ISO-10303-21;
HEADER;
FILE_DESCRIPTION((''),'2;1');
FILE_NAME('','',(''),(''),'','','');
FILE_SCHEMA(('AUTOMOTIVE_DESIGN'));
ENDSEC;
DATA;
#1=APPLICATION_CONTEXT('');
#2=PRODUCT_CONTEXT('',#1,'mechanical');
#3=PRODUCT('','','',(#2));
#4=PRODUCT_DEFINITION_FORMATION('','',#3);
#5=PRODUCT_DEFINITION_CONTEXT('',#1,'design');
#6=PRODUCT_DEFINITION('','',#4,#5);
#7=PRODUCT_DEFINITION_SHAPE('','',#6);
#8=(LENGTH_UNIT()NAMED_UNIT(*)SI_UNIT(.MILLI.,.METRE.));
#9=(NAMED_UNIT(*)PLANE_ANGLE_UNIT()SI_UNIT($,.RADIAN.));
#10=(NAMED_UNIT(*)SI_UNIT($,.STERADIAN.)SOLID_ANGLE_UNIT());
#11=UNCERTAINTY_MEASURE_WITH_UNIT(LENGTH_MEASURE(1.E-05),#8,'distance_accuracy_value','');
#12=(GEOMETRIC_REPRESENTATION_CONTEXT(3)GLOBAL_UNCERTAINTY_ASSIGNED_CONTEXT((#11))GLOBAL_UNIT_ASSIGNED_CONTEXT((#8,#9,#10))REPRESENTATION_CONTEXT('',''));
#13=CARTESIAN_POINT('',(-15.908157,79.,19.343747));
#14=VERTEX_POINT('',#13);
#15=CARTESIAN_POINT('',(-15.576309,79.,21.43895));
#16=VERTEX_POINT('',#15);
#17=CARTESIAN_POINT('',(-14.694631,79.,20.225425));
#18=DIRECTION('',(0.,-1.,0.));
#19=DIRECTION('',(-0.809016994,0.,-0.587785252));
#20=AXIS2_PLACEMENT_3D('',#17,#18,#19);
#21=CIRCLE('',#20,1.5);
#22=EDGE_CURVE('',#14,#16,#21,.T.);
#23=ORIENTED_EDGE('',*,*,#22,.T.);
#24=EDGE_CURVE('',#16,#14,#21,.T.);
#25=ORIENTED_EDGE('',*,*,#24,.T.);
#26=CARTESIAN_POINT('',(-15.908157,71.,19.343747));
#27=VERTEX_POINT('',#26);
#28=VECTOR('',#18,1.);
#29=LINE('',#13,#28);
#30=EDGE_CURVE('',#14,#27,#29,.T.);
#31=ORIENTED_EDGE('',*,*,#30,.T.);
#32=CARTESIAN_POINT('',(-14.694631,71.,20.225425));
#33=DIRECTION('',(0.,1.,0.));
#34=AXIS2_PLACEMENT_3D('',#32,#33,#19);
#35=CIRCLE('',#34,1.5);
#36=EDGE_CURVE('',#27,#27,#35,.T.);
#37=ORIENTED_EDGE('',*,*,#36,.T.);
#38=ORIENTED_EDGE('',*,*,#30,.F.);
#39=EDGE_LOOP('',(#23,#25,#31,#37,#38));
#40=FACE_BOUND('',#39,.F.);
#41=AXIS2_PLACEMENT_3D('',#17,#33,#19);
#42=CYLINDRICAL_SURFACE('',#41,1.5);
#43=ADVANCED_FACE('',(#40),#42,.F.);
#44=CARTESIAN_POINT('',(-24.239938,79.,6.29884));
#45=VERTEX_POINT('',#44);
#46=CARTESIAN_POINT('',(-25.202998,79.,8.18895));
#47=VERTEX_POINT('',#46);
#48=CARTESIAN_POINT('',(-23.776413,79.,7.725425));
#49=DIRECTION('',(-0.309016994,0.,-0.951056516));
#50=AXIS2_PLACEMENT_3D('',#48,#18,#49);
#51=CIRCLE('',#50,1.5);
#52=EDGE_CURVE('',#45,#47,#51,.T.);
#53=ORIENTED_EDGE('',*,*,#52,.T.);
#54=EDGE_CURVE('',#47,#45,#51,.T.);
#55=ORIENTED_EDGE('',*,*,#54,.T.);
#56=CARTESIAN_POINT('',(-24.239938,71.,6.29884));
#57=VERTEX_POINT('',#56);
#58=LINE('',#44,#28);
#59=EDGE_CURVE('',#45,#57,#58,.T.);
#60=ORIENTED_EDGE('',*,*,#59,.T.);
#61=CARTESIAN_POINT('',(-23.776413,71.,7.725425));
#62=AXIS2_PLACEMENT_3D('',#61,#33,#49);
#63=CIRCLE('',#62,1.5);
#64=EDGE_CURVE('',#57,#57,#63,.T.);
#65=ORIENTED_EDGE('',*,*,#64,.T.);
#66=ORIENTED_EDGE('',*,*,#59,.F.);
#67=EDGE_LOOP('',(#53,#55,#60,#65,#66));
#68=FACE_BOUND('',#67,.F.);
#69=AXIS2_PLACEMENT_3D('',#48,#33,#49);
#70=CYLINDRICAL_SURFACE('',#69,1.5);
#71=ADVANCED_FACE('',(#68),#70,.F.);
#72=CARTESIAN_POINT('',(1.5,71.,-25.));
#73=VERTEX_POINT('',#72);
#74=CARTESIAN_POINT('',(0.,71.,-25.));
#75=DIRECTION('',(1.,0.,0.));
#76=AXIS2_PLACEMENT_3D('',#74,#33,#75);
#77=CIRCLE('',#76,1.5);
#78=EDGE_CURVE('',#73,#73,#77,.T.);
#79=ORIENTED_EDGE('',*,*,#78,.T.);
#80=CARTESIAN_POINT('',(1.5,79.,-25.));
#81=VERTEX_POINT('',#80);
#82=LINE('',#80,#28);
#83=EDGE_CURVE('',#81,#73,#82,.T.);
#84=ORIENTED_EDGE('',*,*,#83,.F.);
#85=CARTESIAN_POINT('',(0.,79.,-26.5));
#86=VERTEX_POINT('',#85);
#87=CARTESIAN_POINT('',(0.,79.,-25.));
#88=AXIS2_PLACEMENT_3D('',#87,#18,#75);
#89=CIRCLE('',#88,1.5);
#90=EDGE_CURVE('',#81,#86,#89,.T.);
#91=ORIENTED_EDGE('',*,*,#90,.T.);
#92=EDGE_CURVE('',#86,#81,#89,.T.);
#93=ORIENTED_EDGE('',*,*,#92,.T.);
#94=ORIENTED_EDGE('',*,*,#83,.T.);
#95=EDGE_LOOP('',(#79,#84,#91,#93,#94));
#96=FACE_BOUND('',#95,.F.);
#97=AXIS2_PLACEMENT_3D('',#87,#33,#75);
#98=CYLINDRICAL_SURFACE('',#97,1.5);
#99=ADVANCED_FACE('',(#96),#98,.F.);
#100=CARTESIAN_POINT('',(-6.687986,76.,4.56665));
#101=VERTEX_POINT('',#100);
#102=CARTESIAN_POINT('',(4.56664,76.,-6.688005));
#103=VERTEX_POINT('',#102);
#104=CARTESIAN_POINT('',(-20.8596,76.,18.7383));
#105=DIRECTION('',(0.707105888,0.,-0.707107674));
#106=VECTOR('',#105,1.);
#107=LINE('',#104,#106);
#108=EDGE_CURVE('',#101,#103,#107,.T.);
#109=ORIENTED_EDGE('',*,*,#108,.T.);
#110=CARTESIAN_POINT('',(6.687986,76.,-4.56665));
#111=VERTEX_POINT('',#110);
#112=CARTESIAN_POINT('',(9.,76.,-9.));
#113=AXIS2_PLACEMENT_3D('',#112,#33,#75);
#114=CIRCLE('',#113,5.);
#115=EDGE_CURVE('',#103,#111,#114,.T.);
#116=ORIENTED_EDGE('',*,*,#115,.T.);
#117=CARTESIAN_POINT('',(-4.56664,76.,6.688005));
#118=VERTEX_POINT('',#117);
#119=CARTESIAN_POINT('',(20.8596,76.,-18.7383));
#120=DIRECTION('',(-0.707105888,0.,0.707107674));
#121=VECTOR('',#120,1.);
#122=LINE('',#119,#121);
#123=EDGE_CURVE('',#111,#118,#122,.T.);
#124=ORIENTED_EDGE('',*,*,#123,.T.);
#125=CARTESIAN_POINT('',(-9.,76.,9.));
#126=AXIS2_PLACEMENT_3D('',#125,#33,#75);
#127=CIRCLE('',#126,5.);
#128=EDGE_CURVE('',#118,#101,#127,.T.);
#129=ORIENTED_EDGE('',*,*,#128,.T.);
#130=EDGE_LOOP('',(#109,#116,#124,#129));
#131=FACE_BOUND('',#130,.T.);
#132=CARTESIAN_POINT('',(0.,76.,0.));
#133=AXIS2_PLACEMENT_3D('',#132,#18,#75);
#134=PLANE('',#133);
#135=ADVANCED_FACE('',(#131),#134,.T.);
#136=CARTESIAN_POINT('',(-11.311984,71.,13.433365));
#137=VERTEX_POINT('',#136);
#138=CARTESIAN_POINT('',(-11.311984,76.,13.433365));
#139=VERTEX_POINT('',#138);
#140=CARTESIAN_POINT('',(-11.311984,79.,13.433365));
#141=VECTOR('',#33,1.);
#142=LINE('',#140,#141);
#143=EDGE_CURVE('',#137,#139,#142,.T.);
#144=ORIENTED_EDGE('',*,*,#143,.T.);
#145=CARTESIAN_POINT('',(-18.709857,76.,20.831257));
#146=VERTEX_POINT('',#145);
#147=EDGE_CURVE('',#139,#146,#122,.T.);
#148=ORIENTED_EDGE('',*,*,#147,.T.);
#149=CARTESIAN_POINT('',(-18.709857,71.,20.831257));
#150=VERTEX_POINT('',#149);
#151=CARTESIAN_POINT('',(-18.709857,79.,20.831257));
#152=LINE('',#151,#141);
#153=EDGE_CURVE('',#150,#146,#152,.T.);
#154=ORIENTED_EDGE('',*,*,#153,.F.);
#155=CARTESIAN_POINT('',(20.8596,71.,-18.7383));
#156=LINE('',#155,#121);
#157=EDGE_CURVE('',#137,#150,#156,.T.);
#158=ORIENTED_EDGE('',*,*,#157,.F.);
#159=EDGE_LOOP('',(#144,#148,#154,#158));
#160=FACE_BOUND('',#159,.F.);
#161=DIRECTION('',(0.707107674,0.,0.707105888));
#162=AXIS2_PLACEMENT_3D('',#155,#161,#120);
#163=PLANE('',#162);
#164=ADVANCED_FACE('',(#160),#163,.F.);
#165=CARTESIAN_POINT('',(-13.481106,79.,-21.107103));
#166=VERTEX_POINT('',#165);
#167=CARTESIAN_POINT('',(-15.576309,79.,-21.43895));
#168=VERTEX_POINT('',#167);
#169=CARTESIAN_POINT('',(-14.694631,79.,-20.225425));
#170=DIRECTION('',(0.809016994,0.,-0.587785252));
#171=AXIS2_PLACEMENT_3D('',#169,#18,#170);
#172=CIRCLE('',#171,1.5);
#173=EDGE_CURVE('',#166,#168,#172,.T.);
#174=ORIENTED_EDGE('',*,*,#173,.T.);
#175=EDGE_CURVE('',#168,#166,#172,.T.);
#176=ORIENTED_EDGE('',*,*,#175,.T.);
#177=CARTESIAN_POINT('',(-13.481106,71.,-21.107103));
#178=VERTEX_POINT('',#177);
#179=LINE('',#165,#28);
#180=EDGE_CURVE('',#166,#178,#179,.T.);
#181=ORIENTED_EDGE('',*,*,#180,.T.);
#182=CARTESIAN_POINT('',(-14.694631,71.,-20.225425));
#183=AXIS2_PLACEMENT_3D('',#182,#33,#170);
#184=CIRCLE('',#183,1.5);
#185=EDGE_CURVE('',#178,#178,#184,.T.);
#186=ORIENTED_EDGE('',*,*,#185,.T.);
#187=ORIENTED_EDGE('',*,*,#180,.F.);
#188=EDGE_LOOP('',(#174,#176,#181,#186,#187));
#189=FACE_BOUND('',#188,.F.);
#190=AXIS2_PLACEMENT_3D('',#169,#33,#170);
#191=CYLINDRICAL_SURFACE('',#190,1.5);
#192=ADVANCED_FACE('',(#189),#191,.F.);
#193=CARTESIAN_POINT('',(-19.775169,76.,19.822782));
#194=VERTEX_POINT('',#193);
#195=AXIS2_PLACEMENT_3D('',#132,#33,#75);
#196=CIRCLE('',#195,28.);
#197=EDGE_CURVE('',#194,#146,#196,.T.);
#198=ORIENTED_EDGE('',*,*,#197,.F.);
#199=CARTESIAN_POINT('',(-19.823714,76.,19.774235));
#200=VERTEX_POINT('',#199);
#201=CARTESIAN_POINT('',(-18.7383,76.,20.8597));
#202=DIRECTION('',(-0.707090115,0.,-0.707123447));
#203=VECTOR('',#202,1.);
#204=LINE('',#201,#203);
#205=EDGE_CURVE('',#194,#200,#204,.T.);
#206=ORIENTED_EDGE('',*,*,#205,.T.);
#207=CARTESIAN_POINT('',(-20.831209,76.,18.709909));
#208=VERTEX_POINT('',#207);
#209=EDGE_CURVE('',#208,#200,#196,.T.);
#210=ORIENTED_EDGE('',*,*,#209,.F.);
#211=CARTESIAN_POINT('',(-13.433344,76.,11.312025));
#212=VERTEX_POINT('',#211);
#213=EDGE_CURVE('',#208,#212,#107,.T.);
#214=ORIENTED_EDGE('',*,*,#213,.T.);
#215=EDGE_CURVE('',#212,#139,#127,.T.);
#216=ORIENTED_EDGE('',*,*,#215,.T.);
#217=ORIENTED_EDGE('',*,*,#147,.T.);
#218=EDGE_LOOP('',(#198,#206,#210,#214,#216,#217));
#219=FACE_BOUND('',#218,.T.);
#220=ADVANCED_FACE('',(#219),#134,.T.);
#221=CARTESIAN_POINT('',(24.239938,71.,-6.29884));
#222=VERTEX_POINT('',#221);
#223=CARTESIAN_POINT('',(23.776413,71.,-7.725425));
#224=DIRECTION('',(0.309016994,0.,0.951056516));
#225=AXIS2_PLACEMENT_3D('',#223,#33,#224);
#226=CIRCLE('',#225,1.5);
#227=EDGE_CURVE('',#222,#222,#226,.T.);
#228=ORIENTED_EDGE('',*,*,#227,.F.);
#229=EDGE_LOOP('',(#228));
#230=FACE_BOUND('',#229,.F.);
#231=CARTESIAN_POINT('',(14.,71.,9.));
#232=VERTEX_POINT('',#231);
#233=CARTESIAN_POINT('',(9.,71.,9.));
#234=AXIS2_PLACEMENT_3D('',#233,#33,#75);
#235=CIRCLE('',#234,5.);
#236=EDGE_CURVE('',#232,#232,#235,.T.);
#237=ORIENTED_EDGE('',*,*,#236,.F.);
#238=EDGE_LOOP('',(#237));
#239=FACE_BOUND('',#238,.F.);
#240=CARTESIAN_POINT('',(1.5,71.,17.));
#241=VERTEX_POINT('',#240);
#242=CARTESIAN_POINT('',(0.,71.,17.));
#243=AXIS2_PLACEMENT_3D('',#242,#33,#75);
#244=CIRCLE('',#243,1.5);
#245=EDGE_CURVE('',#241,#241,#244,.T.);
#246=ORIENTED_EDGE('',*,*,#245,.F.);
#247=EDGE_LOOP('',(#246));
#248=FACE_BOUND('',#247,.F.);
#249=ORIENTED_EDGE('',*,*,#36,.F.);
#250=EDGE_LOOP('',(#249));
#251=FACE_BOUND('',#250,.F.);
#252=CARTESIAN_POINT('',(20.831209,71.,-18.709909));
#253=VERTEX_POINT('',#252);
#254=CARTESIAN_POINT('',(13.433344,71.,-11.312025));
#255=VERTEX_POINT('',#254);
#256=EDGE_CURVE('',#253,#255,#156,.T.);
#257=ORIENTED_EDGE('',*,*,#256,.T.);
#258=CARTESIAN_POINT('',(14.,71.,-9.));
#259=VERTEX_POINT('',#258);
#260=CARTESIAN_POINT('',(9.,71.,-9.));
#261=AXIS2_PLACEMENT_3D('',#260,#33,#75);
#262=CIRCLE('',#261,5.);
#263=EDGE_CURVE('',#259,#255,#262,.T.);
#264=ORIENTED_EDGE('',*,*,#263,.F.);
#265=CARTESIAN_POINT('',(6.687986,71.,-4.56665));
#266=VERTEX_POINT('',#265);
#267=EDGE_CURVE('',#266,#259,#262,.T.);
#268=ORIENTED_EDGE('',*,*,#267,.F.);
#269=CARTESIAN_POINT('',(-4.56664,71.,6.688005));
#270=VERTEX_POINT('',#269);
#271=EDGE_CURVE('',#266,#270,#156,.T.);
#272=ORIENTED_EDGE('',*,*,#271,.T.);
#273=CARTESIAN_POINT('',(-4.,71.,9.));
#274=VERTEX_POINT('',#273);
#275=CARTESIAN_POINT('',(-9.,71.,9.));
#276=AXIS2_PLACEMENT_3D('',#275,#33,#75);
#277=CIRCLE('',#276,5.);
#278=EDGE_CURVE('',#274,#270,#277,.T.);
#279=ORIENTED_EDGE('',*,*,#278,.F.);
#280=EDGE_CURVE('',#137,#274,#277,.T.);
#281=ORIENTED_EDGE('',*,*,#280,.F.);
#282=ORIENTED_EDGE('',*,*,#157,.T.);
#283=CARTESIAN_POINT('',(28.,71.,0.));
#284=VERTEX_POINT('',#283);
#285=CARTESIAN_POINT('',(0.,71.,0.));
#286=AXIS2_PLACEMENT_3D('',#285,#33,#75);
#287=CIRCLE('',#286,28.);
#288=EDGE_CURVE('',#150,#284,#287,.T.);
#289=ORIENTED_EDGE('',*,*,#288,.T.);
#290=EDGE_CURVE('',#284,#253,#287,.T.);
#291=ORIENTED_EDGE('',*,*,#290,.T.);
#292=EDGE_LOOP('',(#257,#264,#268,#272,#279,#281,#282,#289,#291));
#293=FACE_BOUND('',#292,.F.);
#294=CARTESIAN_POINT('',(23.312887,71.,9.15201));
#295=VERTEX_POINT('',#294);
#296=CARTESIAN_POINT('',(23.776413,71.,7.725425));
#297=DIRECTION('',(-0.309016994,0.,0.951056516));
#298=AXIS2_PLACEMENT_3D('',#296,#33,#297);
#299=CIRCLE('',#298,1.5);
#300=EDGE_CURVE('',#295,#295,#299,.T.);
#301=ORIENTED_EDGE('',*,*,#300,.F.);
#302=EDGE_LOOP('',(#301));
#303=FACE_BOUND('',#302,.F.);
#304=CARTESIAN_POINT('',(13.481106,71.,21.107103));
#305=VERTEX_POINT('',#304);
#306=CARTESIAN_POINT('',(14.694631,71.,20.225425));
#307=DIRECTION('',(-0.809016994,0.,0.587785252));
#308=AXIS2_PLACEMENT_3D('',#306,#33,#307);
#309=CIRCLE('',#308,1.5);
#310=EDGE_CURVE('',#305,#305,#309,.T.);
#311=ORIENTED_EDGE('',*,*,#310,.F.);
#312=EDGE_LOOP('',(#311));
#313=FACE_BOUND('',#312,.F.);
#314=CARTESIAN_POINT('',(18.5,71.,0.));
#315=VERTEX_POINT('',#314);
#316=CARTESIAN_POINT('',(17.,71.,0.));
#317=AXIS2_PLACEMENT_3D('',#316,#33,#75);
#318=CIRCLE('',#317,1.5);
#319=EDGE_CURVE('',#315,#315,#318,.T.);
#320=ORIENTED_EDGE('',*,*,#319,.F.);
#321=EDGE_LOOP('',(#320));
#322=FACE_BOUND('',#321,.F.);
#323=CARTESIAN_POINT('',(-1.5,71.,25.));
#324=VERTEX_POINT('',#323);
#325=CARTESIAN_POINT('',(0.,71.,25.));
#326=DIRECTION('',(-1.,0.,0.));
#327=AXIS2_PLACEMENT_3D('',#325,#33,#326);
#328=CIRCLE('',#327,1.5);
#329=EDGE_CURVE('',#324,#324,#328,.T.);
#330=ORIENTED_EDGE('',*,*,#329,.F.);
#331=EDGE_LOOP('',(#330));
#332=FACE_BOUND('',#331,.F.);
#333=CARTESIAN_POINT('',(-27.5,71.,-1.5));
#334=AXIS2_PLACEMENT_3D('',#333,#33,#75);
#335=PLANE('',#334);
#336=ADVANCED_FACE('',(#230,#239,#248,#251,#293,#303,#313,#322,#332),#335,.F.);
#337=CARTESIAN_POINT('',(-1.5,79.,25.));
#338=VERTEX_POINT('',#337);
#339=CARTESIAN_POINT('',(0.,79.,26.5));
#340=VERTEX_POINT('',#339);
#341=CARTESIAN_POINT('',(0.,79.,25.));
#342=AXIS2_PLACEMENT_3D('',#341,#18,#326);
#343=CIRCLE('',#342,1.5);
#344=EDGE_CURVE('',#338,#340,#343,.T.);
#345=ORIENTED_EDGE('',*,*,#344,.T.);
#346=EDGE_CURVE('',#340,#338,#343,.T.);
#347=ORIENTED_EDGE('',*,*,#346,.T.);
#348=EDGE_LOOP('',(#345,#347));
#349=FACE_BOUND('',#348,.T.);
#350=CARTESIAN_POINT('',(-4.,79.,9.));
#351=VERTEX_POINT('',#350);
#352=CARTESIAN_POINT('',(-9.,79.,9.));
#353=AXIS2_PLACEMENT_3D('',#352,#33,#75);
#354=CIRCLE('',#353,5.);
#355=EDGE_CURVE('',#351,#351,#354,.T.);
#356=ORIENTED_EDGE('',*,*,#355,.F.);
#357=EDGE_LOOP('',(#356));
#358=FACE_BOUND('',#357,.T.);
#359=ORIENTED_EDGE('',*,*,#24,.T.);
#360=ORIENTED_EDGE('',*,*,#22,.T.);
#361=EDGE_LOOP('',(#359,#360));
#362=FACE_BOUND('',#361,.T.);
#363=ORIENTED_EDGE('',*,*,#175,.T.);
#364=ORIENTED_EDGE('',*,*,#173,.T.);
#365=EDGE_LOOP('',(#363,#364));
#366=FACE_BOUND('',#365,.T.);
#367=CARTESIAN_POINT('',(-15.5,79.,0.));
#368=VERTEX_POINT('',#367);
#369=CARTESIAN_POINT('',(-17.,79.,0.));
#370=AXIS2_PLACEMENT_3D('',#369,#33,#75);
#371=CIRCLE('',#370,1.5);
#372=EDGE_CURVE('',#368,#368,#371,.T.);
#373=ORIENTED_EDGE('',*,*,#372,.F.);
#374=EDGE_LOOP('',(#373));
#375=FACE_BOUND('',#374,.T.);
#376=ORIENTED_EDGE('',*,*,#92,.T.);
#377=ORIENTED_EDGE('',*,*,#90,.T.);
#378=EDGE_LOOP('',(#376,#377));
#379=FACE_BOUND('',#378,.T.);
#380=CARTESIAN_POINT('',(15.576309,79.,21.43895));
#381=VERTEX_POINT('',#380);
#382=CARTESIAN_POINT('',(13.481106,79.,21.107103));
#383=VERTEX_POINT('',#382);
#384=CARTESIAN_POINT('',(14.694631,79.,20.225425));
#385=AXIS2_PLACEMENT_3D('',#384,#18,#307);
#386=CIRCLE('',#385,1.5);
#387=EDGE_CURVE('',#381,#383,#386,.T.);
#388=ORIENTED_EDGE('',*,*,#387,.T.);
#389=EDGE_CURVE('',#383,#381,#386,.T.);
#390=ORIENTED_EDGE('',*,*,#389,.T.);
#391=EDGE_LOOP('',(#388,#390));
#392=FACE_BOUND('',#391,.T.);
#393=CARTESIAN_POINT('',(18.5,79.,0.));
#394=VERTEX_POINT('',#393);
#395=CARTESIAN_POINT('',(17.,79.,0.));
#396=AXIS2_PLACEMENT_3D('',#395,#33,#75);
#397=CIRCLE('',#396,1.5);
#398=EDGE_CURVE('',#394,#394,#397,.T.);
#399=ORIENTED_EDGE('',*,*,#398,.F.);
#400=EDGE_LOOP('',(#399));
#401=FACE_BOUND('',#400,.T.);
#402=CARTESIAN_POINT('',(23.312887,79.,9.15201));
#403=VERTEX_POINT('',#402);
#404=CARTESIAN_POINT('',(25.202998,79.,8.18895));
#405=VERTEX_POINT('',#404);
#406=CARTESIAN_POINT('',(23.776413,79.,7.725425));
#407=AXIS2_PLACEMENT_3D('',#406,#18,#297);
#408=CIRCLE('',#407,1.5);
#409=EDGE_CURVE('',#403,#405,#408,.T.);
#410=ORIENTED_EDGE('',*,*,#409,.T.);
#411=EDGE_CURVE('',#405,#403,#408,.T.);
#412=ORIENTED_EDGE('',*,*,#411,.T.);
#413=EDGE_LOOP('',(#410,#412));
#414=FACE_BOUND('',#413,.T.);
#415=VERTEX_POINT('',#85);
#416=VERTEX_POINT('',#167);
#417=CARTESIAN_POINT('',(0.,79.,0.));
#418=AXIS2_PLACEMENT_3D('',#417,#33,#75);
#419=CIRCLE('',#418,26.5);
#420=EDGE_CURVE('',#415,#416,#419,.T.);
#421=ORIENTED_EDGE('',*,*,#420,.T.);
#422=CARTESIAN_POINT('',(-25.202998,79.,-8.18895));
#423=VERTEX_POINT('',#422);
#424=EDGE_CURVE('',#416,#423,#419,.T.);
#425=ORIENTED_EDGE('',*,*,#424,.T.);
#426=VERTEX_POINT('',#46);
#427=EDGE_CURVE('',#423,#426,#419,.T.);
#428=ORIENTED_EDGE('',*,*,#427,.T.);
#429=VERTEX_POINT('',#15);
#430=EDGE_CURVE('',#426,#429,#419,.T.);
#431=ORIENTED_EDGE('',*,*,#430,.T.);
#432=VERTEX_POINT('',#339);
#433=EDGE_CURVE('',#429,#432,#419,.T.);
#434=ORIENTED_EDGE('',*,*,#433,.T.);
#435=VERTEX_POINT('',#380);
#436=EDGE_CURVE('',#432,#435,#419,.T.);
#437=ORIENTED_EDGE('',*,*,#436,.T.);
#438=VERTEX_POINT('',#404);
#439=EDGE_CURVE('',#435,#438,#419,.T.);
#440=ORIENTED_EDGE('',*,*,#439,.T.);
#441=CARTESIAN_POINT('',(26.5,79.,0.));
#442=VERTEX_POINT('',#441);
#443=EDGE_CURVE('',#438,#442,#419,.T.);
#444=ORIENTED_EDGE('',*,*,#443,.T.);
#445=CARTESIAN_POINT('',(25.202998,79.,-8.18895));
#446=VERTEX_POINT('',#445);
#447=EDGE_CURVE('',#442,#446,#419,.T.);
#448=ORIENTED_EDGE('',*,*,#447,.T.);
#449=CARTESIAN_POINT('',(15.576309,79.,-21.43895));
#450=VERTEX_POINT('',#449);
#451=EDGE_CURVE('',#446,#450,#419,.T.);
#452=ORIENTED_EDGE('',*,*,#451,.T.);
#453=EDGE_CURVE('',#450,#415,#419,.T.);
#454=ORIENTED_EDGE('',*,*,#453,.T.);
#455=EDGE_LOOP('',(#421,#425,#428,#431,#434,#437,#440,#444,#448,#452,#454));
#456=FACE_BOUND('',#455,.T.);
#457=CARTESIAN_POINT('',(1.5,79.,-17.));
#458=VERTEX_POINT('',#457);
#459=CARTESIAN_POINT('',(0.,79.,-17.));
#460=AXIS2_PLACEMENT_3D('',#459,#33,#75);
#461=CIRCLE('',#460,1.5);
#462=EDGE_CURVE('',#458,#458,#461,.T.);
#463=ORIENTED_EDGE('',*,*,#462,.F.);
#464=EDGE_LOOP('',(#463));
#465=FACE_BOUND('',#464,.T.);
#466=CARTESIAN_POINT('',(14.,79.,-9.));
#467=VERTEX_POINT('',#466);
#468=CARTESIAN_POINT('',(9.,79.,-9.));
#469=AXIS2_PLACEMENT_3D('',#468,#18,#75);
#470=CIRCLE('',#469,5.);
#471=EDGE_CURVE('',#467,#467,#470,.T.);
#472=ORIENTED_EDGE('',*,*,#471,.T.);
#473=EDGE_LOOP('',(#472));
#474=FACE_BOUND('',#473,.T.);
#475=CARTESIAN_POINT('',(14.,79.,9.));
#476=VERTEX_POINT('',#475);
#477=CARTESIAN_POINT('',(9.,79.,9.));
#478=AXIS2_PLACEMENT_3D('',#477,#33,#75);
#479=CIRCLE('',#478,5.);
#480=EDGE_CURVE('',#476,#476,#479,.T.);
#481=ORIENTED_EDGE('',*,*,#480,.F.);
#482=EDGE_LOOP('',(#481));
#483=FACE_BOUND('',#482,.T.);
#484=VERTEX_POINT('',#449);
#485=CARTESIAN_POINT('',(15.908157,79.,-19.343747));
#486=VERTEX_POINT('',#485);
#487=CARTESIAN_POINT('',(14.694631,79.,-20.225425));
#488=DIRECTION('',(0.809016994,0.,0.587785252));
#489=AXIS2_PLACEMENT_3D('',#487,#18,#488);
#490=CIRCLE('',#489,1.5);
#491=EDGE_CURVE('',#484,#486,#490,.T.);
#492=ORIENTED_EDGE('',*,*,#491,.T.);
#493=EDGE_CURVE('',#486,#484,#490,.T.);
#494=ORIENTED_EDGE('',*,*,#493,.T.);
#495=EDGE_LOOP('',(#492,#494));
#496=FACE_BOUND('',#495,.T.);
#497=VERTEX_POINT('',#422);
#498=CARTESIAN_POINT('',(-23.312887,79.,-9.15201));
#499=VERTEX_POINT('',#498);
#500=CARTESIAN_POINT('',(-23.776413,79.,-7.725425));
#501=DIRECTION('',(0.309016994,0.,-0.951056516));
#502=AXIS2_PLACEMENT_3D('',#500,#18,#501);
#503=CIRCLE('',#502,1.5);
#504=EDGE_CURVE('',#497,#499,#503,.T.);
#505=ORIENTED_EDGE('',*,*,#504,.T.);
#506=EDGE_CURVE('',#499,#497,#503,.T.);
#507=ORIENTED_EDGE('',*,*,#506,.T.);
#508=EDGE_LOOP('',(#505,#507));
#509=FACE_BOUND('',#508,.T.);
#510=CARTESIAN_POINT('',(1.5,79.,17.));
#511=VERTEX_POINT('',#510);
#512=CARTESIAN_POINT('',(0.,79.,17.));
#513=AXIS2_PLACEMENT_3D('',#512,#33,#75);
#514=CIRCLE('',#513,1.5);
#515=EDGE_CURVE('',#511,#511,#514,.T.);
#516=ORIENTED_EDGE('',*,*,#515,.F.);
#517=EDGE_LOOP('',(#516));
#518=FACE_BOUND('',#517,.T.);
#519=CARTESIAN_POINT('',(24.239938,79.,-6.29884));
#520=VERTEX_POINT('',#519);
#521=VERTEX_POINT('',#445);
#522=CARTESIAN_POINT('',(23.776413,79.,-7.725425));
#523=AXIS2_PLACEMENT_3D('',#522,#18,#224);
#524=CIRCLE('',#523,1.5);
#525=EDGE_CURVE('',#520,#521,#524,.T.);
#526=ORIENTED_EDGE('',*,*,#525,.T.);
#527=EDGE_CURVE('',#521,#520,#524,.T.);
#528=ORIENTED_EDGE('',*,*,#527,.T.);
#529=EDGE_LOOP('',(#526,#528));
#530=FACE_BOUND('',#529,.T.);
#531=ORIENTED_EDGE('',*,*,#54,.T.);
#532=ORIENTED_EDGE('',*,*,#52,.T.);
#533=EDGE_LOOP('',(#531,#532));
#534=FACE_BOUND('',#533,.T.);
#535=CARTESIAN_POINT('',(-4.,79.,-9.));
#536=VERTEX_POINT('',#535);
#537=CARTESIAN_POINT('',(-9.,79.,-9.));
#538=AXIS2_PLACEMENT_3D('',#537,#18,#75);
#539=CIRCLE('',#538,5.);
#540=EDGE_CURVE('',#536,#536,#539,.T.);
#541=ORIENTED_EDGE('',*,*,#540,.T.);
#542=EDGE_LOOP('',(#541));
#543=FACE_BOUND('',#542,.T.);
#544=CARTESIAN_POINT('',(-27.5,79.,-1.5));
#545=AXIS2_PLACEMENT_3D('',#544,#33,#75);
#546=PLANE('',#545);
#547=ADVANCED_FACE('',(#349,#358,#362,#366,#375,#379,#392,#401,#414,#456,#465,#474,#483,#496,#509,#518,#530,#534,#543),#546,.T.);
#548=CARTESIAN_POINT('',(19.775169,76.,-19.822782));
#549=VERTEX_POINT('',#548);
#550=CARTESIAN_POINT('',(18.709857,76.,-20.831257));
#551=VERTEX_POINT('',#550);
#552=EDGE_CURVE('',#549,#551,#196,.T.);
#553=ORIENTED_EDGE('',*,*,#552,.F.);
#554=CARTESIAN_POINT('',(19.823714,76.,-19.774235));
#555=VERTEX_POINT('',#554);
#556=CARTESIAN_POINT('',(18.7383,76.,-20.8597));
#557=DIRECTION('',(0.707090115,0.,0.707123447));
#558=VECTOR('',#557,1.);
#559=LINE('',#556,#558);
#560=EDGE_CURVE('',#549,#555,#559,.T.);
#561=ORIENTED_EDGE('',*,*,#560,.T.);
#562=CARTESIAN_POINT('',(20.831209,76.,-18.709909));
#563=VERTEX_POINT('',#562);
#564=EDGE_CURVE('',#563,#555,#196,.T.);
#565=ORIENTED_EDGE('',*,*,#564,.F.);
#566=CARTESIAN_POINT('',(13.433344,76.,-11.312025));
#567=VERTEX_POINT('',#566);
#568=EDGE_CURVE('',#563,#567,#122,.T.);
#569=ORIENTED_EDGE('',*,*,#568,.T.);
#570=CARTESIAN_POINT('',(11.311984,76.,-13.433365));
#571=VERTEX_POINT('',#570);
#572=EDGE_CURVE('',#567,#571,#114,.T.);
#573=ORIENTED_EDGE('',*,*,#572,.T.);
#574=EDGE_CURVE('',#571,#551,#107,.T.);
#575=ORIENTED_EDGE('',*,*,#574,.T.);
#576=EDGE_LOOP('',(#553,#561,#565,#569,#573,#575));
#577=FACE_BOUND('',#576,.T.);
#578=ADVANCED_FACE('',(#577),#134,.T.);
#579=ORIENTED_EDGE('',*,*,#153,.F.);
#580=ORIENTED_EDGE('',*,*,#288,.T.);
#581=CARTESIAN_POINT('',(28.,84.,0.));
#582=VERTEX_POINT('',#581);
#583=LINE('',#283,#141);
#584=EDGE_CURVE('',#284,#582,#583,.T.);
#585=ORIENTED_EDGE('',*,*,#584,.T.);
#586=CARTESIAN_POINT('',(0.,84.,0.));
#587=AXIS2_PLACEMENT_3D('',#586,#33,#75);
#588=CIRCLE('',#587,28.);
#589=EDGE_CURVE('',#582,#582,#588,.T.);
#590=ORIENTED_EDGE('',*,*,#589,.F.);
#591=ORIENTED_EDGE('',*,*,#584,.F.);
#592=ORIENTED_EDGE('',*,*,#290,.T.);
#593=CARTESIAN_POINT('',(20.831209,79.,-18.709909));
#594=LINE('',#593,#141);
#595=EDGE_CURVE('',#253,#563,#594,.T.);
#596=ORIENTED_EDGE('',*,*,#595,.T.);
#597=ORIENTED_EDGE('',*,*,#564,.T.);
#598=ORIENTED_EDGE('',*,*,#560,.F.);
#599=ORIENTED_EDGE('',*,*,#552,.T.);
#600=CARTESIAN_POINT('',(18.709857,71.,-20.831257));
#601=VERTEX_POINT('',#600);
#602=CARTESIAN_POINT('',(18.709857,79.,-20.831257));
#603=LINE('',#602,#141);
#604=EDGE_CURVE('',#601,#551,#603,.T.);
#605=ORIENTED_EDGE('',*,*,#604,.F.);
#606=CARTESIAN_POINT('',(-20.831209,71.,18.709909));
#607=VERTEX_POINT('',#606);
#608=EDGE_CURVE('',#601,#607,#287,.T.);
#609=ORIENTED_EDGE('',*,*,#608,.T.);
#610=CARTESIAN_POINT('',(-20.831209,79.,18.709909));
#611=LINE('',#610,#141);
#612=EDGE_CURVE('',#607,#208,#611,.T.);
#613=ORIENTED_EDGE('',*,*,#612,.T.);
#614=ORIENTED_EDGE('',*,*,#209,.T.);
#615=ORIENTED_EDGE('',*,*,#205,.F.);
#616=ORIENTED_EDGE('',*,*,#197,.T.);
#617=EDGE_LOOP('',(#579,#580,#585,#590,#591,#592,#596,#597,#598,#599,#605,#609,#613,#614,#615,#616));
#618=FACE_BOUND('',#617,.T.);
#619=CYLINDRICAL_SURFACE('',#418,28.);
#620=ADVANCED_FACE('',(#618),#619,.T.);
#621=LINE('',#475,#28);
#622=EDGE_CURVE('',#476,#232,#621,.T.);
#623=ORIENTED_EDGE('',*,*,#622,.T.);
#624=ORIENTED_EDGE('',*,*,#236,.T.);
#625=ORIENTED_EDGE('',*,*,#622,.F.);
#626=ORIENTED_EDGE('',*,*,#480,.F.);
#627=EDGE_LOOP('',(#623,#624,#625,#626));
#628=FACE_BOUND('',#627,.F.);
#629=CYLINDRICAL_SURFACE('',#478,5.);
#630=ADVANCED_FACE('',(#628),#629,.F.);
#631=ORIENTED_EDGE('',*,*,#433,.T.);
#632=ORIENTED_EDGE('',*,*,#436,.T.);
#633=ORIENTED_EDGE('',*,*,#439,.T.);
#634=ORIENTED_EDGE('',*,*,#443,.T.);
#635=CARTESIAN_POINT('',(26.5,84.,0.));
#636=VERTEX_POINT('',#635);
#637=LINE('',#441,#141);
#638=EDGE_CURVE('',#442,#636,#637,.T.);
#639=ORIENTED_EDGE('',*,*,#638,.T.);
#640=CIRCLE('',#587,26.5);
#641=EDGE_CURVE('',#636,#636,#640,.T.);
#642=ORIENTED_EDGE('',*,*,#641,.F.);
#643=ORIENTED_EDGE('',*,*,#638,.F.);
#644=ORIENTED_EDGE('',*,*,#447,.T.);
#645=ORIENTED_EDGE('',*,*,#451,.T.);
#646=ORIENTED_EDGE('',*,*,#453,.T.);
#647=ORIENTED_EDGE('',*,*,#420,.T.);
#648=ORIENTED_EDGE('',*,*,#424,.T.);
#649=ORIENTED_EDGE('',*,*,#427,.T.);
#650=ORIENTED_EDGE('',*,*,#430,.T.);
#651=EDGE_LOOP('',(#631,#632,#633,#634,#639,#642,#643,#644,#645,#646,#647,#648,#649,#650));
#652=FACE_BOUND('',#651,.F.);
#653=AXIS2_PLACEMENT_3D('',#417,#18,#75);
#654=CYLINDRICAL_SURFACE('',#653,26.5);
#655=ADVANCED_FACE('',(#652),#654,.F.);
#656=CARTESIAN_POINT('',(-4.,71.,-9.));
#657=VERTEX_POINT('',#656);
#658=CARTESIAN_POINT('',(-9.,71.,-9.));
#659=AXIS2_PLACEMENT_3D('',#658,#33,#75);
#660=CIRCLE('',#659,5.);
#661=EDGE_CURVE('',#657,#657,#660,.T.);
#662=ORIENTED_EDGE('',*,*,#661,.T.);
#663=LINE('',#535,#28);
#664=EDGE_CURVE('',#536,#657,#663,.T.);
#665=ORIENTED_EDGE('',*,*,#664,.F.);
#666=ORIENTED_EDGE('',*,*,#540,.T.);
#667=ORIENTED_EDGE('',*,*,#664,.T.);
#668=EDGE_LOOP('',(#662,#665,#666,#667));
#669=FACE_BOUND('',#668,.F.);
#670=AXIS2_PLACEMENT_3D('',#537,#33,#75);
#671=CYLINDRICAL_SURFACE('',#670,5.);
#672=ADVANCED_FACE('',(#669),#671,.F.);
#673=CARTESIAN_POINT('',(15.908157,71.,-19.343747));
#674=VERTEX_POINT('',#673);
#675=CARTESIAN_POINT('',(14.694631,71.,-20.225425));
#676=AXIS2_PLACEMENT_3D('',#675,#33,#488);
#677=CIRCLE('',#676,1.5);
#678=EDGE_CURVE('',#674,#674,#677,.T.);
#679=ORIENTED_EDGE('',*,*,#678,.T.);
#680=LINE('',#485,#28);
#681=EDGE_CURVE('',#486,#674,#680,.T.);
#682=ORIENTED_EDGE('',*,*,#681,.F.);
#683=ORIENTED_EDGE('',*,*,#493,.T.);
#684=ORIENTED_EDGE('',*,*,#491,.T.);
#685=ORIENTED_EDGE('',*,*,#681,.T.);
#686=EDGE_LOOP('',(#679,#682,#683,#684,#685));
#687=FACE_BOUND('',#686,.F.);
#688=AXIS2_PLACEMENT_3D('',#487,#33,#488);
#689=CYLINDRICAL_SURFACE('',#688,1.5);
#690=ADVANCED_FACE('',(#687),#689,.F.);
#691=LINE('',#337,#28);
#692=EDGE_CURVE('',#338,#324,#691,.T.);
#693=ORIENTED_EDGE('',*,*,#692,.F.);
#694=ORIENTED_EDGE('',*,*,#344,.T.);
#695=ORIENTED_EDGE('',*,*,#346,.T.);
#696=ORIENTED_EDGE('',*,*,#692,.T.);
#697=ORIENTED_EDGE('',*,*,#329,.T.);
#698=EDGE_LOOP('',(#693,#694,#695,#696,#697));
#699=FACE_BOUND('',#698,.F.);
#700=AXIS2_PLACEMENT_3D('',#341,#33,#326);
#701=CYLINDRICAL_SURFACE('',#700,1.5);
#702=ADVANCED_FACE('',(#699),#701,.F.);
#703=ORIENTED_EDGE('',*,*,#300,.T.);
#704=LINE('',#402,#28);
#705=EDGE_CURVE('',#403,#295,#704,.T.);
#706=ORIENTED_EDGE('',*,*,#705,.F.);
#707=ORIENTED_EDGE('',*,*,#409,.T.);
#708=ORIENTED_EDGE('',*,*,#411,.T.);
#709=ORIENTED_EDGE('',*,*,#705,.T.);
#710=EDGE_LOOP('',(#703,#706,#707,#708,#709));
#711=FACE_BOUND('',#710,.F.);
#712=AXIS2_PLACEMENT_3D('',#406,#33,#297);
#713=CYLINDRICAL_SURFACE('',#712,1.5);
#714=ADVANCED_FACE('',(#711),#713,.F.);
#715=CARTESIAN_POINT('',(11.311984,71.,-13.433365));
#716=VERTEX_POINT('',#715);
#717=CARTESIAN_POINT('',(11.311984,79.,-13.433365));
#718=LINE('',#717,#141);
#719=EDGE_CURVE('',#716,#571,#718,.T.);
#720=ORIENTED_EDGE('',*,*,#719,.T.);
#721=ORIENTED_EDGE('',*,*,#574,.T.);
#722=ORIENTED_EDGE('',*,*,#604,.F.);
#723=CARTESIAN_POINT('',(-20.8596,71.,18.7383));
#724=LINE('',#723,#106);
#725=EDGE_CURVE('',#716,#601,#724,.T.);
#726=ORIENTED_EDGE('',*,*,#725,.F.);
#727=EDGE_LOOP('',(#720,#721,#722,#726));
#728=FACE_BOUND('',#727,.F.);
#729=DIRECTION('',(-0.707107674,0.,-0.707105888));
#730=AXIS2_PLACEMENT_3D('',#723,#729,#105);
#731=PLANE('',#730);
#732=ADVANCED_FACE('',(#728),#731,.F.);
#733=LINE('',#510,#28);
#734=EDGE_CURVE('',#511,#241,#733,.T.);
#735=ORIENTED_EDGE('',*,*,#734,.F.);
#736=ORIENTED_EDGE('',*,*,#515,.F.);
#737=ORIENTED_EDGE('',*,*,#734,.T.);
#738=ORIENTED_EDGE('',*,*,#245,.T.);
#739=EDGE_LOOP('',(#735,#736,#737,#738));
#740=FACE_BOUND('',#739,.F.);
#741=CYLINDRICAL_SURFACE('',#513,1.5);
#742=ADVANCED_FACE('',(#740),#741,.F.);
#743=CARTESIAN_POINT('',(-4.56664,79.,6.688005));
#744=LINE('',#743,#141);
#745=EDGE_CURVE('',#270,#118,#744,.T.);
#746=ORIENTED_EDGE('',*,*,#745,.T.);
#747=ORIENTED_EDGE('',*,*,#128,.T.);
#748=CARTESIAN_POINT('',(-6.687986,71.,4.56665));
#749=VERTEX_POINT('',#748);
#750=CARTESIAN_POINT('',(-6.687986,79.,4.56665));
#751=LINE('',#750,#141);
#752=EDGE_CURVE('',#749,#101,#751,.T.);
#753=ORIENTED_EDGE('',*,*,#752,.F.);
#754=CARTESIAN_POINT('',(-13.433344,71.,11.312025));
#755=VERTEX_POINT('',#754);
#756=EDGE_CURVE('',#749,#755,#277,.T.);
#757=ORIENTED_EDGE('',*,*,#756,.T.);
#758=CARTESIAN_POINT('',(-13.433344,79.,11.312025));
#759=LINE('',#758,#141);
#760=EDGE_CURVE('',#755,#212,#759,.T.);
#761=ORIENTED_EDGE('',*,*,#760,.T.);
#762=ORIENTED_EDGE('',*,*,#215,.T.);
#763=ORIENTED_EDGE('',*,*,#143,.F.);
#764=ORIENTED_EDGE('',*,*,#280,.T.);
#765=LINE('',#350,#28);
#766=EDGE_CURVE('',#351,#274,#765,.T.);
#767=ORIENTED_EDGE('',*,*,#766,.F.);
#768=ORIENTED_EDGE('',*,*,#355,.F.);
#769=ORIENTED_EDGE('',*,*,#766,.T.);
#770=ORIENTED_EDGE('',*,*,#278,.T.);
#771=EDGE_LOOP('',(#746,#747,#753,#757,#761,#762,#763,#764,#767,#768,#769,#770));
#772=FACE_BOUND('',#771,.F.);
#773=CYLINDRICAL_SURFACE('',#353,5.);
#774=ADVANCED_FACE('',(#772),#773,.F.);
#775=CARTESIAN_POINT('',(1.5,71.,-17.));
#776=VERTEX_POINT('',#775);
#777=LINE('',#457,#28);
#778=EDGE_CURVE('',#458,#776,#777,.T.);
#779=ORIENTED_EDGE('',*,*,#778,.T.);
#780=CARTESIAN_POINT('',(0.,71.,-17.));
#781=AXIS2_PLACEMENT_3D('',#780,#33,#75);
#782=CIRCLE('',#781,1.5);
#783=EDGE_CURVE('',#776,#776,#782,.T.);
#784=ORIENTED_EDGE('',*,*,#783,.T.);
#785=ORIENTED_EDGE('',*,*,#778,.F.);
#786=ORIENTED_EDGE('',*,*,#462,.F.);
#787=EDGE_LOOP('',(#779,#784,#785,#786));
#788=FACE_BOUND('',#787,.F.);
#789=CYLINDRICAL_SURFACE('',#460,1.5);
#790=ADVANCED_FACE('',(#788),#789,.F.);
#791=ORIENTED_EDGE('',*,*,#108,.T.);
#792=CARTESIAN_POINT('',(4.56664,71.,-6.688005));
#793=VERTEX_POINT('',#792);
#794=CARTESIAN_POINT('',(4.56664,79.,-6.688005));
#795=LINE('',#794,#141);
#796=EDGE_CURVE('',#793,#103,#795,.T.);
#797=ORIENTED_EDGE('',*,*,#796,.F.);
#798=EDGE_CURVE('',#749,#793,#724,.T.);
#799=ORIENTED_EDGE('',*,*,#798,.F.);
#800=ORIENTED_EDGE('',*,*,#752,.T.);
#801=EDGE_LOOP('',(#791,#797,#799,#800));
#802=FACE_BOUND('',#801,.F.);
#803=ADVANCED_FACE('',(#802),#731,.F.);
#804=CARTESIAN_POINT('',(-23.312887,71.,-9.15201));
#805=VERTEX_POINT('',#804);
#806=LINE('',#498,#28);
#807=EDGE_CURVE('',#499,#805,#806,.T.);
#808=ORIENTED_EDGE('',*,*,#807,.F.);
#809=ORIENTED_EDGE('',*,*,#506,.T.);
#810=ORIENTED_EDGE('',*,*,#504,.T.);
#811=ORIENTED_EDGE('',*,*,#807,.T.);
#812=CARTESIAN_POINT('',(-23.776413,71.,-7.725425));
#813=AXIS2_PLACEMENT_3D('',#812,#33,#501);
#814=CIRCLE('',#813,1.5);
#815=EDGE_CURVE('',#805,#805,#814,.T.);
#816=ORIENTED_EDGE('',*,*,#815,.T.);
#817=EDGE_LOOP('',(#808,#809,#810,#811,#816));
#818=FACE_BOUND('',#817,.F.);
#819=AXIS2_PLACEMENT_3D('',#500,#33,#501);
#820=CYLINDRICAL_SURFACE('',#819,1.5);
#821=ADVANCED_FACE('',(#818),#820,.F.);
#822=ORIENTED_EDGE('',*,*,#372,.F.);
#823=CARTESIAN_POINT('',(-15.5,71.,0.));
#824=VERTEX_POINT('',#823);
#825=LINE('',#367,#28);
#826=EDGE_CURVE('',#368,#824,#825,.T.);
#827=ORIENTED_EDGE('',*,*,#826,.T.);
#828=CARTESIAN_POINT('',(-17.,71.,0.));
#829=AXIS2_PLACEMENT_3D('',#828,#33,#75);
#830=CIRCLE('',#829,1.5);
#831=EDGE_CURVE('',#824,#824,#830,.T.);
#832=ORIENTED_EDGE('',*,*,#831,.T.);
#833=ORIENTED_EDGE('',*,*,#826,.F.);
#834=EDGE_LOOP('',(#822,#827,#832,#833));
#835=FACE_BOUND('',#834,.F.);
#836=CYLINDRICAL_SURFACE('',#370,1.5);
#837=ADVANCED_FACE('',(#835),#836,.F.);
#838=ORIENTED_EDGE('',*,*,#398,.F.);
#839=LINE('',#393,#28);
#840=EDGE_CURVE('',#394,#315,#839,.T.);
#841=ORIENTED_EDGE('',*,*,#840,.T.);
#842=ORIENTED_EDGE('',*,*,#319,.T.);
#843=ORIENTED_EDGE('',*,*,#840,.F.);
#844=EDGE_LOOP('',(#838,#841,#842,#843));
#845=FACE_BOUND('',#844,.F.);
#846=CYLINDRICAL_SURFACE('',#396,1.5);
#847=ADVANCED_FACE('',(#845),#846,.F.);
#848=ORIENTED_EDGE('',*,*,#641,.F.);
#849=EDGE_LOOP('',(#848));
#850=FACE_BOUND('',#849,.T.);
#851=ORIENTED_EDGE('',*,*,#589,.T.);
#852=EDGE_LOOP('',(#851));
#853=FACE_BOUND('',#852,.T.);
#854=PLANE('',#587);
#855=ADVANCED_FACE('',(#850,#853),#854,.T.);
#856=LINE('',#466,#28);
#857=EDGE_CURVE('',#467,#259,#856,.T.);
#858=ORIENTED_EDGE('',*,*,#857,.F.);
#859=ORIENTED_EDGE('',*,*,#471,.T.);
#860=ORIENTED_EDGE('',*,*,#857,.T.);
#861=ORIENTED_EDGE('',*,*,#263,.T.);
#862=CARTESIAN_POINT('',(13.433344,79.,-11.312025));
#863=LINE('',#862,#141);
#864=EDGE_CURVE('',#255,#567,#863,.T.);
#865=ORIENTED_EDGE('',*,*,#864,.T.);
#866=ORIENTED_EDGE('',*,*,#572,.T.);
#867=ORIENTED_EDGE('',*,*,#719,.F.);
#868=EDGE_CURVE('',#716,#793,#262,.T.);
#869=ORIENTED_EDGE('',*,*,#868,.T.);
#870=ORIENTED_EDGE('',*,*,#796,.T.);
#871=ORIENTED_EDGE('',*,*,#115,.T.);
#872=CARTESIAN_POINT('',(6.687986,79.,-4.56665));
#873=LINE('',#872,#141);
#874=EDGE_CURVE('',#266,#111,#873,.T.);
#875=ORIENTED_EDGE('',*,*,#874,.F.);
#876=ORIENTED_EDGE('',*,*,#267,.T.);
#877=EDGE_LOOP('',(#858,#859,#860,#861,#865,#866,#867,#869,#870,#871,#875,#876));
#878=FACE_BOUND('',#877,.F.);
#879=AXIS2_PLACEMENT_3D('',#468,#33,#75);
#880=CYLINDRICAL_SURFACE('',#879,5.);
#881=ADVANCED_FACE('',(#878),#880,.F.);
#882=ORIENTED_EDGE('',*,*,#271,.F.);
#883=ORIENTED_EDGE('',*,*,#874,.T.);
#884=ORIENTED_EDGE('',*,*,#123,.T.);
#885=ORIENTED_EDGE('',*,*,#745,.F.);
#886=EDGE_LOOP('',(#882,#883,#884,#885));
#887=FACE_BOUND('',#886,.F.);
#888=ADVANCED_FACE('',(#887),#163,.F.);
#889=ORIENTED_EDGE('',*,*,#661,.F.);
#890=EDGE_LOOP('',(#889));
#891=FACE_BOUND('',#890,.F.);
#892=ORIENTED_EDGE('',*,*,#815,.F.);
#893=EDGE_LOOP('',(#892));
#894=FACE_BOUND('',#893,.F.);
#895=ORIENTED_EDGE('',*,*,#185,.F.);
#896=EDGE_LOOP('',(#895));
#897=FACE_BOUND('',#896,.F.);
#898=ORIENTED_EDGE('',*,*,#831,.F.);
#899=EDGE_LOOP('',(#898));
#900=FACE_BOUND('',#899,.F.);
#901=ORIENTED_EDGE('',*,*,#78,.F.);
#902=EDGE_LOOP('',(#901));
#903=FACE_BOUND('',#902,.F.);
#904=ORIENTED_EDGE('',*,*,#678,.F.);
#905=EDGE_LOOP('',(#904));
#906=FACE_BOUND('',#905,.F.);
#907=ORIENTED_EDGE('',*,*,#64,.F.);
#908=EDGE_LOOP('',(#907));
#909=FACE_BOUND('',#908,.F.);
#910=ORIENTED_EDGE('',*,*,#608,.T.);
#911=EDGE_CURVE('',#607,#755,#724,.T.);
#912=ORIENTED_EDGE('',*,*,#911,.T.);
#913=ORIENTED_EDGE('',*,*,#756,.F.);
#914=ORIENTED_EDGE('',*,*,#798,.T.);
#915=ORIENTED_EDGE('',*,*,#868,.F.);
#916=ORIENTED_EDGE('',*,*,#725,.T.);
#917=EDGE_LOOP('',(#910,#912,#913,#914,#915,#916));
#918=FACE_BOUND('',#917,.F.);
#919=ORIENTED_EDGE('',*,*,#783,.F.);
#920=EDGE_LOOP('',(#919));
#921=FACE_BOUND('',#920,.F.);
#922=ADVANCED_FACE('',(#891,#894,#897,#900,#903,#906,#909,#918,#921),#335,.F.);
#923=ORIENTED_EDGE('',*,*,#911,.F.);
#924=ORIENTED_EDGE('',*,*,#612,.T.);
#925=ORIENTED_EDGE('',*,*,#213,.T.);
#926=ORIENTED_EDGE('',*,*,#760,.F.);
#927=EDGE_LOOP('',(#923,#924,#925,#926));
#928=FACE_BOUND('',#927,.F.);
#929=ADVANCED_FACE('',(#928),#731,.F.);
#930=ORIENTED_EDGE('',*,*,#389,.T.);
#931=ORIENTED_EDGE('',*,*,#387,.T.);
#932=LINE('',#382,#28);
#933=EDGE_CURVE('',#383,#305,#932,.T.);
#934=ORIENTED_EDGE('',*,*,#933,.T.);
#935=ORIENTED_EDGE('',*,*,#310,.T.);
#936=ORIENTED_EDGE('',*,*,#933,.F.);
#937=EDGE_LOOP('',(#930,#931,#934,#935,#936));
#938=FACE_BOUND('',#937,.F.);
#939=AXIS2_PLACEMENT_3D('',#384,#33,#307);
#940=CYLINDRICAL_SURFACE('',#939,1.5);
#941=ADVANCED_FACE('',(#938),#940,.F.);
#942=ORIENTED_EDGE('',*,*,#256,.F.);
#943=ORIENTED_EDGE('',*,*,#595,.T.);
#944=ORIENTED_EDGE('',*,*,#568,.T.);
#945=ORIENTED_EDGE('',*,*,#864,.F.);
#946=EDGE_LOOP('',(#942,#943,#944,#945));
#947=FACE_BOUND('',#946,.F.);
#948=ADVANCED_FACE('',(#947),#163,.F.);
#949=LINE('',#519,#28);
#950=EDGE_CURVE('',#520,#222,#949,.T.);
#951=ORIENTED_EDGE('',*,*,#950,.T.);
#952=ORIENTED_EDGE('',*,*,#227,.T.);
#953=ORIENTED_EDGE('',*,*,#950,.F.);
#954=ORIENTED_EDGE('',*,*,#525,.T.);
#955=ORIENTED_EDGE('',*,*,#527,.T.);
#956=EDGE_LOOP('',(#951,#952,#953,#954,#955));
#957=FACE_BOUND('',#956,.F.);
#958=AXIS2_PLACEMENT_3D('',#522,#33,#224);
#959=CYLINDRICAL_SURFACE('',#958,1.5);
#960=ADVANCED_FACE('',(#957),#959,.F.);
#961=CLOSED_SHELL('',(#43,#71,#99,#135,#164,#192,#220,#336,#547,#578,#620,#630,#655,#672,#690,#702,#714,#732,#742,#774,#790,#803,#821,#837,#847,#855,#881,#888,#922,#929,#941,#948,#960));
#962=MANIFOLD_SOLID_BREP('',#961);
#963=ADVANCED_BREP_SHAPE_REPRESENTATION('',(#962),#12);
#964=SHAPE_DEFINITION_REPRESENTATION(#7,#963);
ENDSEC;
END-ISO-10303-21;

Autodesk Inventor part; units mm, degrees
ref_plane "YZ Plane" through (0, 0, 0) normal (1, 0, 0) x (0, 1, 0)
ref_plane "XZ Plane" through (0, 0, 0) normal (0, 1, 0) x (-1, 0, 0)
ref_plane "XY Plane" through (0, 0, 0) normal (0, 0, 1) x (1, 0, 0)
sketch "Sketch1" plane through (0, 0, 0) normal (0, 0, 1) x (1, 0, 0)
  line L0 (-27.5, 79) -> (27.5, 79)
  line L1 (27.5, 79) -> (27.5, -79)
  line L2 (27.5, -79) -> (-27.5, -79)
  line L3 (-27.5, -79) -> (-27.5, 79)
  line L4 (-20, 71.5) -> (20, 71.5)
  line L5 (20, 71.5) -> (20, -71.5)
  line L6 (20, -71.5) -> (-20, -71.5)
  line L7 (-20, -71.5) -> (-20, 71.5)
  point P0 (0, 0)
  point P1 (0, -79)
  dimension "d0" = 55
  dimension "d1" = 158
  dimension "d2" = 79
  dimension "d3" = 27.5
  dimension "d4" = 143
  dimension "d5" = 40
  dimension "d6" = 20
  dimension "d7" = 71.5
extrude "Extrusion1" add sketch "Sketch1" along normal mid plane 3
sketch "Sketch2" plane through (-27.5, 79, -1.5) normal (0, 1, 0) x (1, 0, 0)
  circle A0 centre (27.5, -1.5) radius 28
  point P0 (27.5, -1.5)
  dimension "d10" = 56
extrude "Extrusion2" add sketch "Sketch2" against normal blind 8
sketch "Sketch3" plane through (0, 0, 1.5) normal (0, 0, 1) x (1, 0, 0)
  line L0 (-25, 71) -> (25, 71)
  line L1 (25, 71) -> (25, -9)
  line L2 (25, -9) -> (-25, -9)
  line L3 (-25, -9) -> (-25, 71)
  circle A0 centre (-22, -6) radius 1.5
  circle A1 centre (-22, 68) radius 1.5
  circle A2 centre (22, -6) radius 1.5
  circle A3 centre (22, 68) radius 1.5
  line L4 (-28, 71) -> (28, 71) projected
  point P0 (0, 0)
  dimension "d13" = 80
  dimension "d14" = 50
  dimension "d15" = 25
  dimension "d16" = 3
  dimension "d18" = 3
  dimension "d19" = 3
  dimension "d20" = 3
  dimension "d21" = 44
  dimension "d22" = 44
  dimension "d23" = 22
  dimension "d24" = 22
  dimension "d25" = 74
  dimension "d27" = 74
  dimension "d77" = 0
  dimension "d78" = 3
  dimension "d79" = 3
extrude "Extrusion3" cut sketch "Sketch3" against normal blind 6 contours A0 | A1 | A2 | A3
sketch "Sketch4" plane through (-27.5, -79, 1.5) normal (0, -1, 0) x (1, 0, 0)
  circle A0 centre (27.5, -1.5) radius 28
  point P0 (27.5, -1.5)
extrude "Extrusion4" add sketch "Sketch4" along normal blind 8
sketch "Sketch5" plane through (0, 0, 0) normal (1, 0, 0) x (0, 1, 0)
  circle A0 centre (-81.5, 0) radius 1.5
  line L0 (-79, 28) -> (-79, -28) projected
  point P0 (0, 0)
  dimension "d33" = 3
  dimension "d34" = 2.5
extrude "Extrusion5" cut sketch "Sketch5" along normal through all both and the other way through all
thread "Thread1" size "M3x0.5" class "6H" standard "ANSI Metric M Profile" full length
sketch "Sketch6" plane through (0, -87, 0) normal (0, -1, 0) x (1, 0, 0)
  circle A0 centre (0, 0) radius 25
  circle A1 centre (0, 0) radius 22.5
  point P0 (0, 0)
  dimension "d39" = 50
  dimension "d40" = 45
extrude "Extrusion6" add sketch "Sketch6" along normal blind 5
thread "Thread2" size "M50x2" class "6g" standard "ANSI Metric M Profile" full length
sketch "Sketch7" plane through (0, -79, 0) normal (0, 1, 0) x (1, 0, 0)
  circle A0 centre (0, 0) radius 22.5 projected
  line L0 (14.7394, 17) -> (-15.2606, 17)
  line L1 (-15.2606, 17) -> (-15.2606, 8)
  line L2 (-15.2606, 8) -> (14.7394, 8)
  line L3 (14.7394, 8) -> (14.7394, 17)
  line L4 (14.7394, -7.5337) -> (-15.2606, -7.5337)
  line L5 (-15.2606, -7.5337) -> (-15.2606, -16.5337)
  line L6 (-15.2606, -16.5337) -> (14.7394, -16.5337)
  line L7 (14.7394, -16.5337) -> (14.7394, -7.5337)
  point P0 (0, 0)
  point P1 (-14.7394, 17)
  point P2 (-15.2606, 16.5337)
  dimension "d45" = 9
  dimension "d46" = 9
  dimension "d47" = 30
  dimension "d48" = 8
extrude "Extrusion7" cut sketch "Sketch7" against normal blind 10 contours L5 L4 L7 L6 | L3 L2 L1 A0 L0
sketch "Sketch8" plane through (0, 79, 0) normal (0, 1, 0) x (1, 0, 0)
  circle A0 centre (0, -17) radius 1.5
  circle A1 centre (-17, 0) radius 1.5
  circle A2 centre (0, 17) radius 1.5
  circle A3 centre (17, 0) radius 1.5
  point P0 (0, 0)
  dimension "d51" = 3
  dimension "d52" = 3
  dimension "d53" = 3
  dimension "d54" = 3
  dimension "d55" = 34
  dimension "d56" = 34
  dimension "d57" = 17
  dimension "d58" = 17
extrude "Extrusion8" cut sketch "Sketch8" against normal blind 10
sketch "Sketch10" plane through (0, 79, 0) normal (0, 1, 0) x (1, 0, 0)
  circle A0 centre (0, 0) radius 28
  circle A1 centre (0, 0) radius 26.5
  point P0 (0, 0)
  dimension "d80" = 53
  dimension "d81" = 56
extrude "Extrusion10" add sketch "Sketch10" along normal blind 5
thread "Thread3" size "M55x2" class "6H" standard "ANSI Metric M Profile" full length
sketch "Sketch11" plane through (0, 79, 0) normal (0, 1, 0) x (1, 0, 0)
  circle A0 centre (0, 0) radius 25 projected
  circle A1 centre (0, 25) radius 1.5
  point P0 (0, 0)
  dimension "d86" = 3
extrude "Extrusion11" cut sketch "Sketch11" against normal up to surface (8 mm away) contours A1 A0 | A0 A1 picked at (-0.0591, 24.5002) picked at (0.0534, 25.4938)
pattern_circular "Circular Pattern1" count 10 over 360 about axis through (0, 79, 0) along (0, -1, 0) of "Extrusion11"
sketch "Sketch12" plane through (0, 0, -1.5) normal (0, 0, -1) x (-1, 0, 0)
  circle A0 centre (-22, -89.4052) radius 1.5
  point P0 (0, 0)
  dimension "d93" = 3
  dimension "d94" = 22
extrude "Extrusion12" cut sketch "Sketch12" against normal blind 10
pattern_linear "Rectangular Pattern1" count 2 spacing 100 along (0, -1, 0) of "Extrusion3"
sketch "Sketch13" plane through (0, 79, -25) normal (0, 1, 0) x (1, 0, 0)
  circle A0 centre (9, -34) radius 5
  line L0 (14.7394, -17) -> (-15.2606, -17) projected
  circle A1 centre (9, -16) radius 5
  circle A2 centre (-9, -16) radius 5
  circle A3 centre (-9, -34) radius 5
  point P0 (0, -25)
  dimension "d100" = 10
  dimension "d101" = 10
  dimension "d104" = 18
  dimension "d108" = 9
  dimension "d109" = 9
  dimension "d110" = 9
  dimension "d111" = 10
  dimension "d112" = 10
  dimension "d113" = 9
  dimension "d114" = 9
  dimension "d115" = 9
  dimension "d116" = 9
extrude "Extrusion13" cut sketch "Sketch13" against normal up to surface (8 mm away)
sketch "Sketch14" plane through (-20, -71.5, 1.5) normal (0, 1, 0) x (1, 0, 0)
  arc A0 (4.7394, 18.0337) -> (4.7394, -15.0337) centre (20, 1.5) ccw projected
  line L0 (-7.5, 0) -> (47.5, 0) projected
  line L1 (-2.4455, 3.065) -> (42.5703, 3.065)
  line L2 (42.5703, 3.065) -> (42.5703, 0)
  line L3 (42.5703, 0) -> (-2.4455, 0)
  line L4 (-2.4455, 0) -> (-2.4455, 3.065)
  point P0 (20, 1.5)
  point P1 (-2.4455, 0)
extrude "Extrusion14" add sketch "Sketch14" along normal up to surface (142.5 mm away) contours L1 L2 L0 L4
ref_plane "Work Plane1" through (0, 0, 61.5) normal (0, 0, 1) x (1, 0, 0)
sketch "Sketch15" plane through (0, 0, 61.5) normal (0, 0, 1) x (1, 0, 0)
  line L0 (-22.4455, 66.5677) -> (-22.4455, -4.5677) projected
  line L1 (-22.4455, 66.5) -> (20.5545, 66.5)
  line L2 (20.5545, 66.5) -> (20.5545, -66.5)
  line L3 (20.5545, -66.5) -> (-22.4455, -66.5)
  line L4 (-22.4455, -66.5) -> (-22.4455, 66.5)
  line L5 (-22.4455, 56.5) -> (20.5545, 56.5)
  line L6 (-22.4455, 46.5) -> (20.5545, 46.5)
  line L7 (-22.4455, 36.5) -> (20.5545, 36.5)
  line L8 (-22.4455, 26.5) -> (20.5545, 26.5)
  line L9 (-22.4455, 16.5) -> (20.5545, 16.5)
  line L10 (-22.4455, 6.5) -> (20.5545, 6.5)
  line L11 (-22.4455, -3.5) -> (20.5545, -3.5)
  line L12 (-22.4455, -13.5) -> (20.5545, -13.5)
  line L13 (-22.4455, -23.5) -> (20.5545, -23.5)
  line L14 (-22.4455, -33.5) -> (20.5545, -33.5)
  line L15 (-22.4455, -43.5) -> (20.5545, -43.5)
  line L16 (-22.4455, -53.5) -> (20.5545, -53.5)
  line L17 (-22.4455, -63.5) -> (20.5545, -63.5)
  line L18 (15.5545, 66.5) -> (15.5545, -66.5)
  line L19 (10.5545, 66.5) -> (10.5545, -66.5)
  line L20 (5.5545, 66.5) -> (5.5545, -66.5)
  line L21 (0.5545, 66.5) -> (0.5545, -66.5)
  line L22 (-4.4455, 66.5) -> (-4.4455, -66.5)
  line L23 (-9.4455, 66.5) -> (-9.4455, -66.5)
  line L24 (-14.4455, 66.5) -> (-14.4455, -66.5)
  line L25 (-19.4455, 66.5) -> (-19.4455, -66.5)
  line L26 (-24.4455, 66.5) -> (-24.4455, -66.5)
  point P0 (0, 0)
  point P1 (15.5545, -43.5)
  point P2 (15.5545, -53.5)
  point P3 (5.5545, -43.5)
  point P4 (5.5545, -53.5)
  point P5 (10.5545, -53.5)
  point P6 (10.5545, -43.5)
  point P7 (-4.4455, -43.5)
  point P8 (-4.4455, -53.5)
  point P9 (0.5545, -53.5)
  point P10 (0.5545, -43.5)
  point P11 (-14.4455, -43.5)
  point P12 (-14.4455, -53.5)
  point P13 (-9.4455, -53.5)
  point P14 (-9.4455, -43.5)
  point P15 (-19.4455, -53.5)
  point P16 (-19.4455, -43.5)
  point P17 (10.5545, -23.5)
  point P18 (10.5545, -33.5)
  point P19 (15.5545, -33.5)
  point P20 (15.5545, -23.5)
  point P21 (0.5545, -23.5)
  point P22 (0.5545, -33.5)
  point P23 (5.5545, -33.5)
  point P24 (5.5545, -23.5)
  point P25 (-9.4455, -23.5)
  point P26 (-9.4455, -33.5)
  point P27 (-4.4455, -33.5)
  point P28 (-4.4455, -23.5)
  point P29 (-19.4455, -23.5)
  point P30 (-19.4455, -33.5)
  point P31 (-14.4455, -33.5)
  point P32 (-14.4455, -23.5)
  point P33 (15.5545, -3.5)
  point P34 (15.5545, -13.5)
  point P35 (5.5545, -3.5)
  point P36 (5.5545, -13.5)
  point P37 (10.5545, -13.5)
  point P38 (10.5545, -3.5)
  point P39 (-4.4455, -3.5)
  point P40 (-4.4455, -13.5)
  point P41 (0.5545, -13.5)
  point P42 (0.5545, -3.5)
  point P43 (-14.4455, -3.5)
  point P44 (-14.4455, -13.5)
  point P45 (-9.4455, -13.5)
  point P46 (-9.4455, -3.5)
  point P47 (-19.4455, -13.5)
  point P48 (-19.4455, -3.5)
  point P49 (-22.4455, -4.5677)
  point P50 (15.5545, 16.5)
  point P51 (15.5545, 6.5)
  point P52 (5.5545, 16.5)
  point P53 (5.5545, 6.5)
  point P54 (10.5545, 6.5)
  point P55 (10.5545, 16.5)
  point P56 (-4.4455, 16.5)
  point P57 (-4.4455, 6.5)
  point P58 (0.5545, 6.5)
  point P59 (0.5545, 16.5)
  point P60 (-14.4455, 16.5)
  point P61 (-14.4455, 6.5)
  point P62 (-9.4455, 6.5)
  point P63 (-9.4455, 16.5)
  point P64 (-19.4455, 6.5)
  point P65 (-19.4455, 16.5)
  point P66 (-19.4455, 36.5)
  point P67 (-19.4455, 26.5)
  point P68 (-14.4455, 26.5)
  point P69 (-14.4455, 36.5)
  point P70 (-19.4455, 56.5)
  point P71 (-19.4455, 46.5)
  point P72 (-14.4455, 46.5)
  point P73 (-14.4455, 56.5)
  point P74 (-9.4455, 56.5)
  point P75 (-9.4455, 46.5)
  point P76 (-4.4455, 46.5)
  point P77 (-4.4455, 56.5)
  point P78 (-9.4455, 36.5)
  point P79 (-9.4455, 26.5)
  point P80 (-4.4455, 26.5)
  point P81 (-4.4455, 36.5)
  point P82 (10.5545, 36.5)
  point P83 (10.5545, 26.5)
  point P84 (15.5545, 26.5)
  point P85 (15.5545, 36.5)
  point P86 (10.5545, 56.5)
  point P87 (10.5545, 46.5)
  point P88 (15.5545, 46.5)
  point P89 (15.5545, 56.5)
  point P90 (0.5545, 56.5)
  point P91 (0.5545, 46.5)
  point P92 (5.5545, 46.5)
  point P93 (5.5545, 56.5)
  point P94 (0.5545, 36.5)
  point P95 (0.5545, 26.5)
  point P96 (5.5545, 26.5)
  point P97 (5.5545, 36.5)
  dimension "d122" = 43
  dimension "d123" = 133
  dimension "d124" = 66.5
  dimension "d127" = 10
  dimension "d134" = 5
extrude "Extrusion15" cut sketch "Sketch15" against normal up to surface (63.065 mm away) contours L5 L24 L6 L25 | L7 L24 L8 L25 | L5 L22 L6 L23 | L9 L25 L10 L0 | L7 L22 L8 L23 | L5 L20 L6 L21 | L11 L25 L12 L4 L0 | L9 L23 L10 L24 | L7 L20 L8 L21 | L5 L18 L6 L19 | L11 L23 L12 L24 | L9 L21 L10 L22 | L13 L24 L14 L25 | L7 L18 L8 L19 | L11 L21 L12 L22 | L9 L19 L10 L20 | L15 L25 L16 L4 | L13 L22 L14 L23 | L11 L19 L12 L20 | L15 L23 L16 L24 | L9 L2 L10 L18 | L13 L20 L14 L21 | L11 L2 L12 L18 | L15 L21 L16 L22 | L13 L18 L14 L19 | L15 L19 L16 L20 | L15 L2 L16 L18
ref_plane "Work Plane2" through (0, 71, 0) normal (0, -1, 0) x (1, 0, 0)
split "Split1" plane through (0, 71, 0) removes the side toward (0, -1, 0)
sketch "Sketch16" plane through (0, 71, 0) normal (0, -1, 0) x (1, 0, 0)
  line L0 (-18.7383, 20.8597) -> (-20.8596, 18.7383)
  line L1 (-20.8596, 18.7383) -> (18.7383, -20.8597)
  line L2 (18.7383, -20.8597) -> (20.8596, -18.7383)
  line L3 (20.8596, -18.7383) -> (-18.7383, 20.8597)
  point P0 (0, 0)
  point P1 (0, 28)
  dimension "d142" = 3
  dimension "d143" = 1.5
  dimension "d144" = 56
  dimension "d146" = 28
extrude "Extrusion16" cut sketch "Sketch16" against normal blind 5
properties part number "case v0 top"
